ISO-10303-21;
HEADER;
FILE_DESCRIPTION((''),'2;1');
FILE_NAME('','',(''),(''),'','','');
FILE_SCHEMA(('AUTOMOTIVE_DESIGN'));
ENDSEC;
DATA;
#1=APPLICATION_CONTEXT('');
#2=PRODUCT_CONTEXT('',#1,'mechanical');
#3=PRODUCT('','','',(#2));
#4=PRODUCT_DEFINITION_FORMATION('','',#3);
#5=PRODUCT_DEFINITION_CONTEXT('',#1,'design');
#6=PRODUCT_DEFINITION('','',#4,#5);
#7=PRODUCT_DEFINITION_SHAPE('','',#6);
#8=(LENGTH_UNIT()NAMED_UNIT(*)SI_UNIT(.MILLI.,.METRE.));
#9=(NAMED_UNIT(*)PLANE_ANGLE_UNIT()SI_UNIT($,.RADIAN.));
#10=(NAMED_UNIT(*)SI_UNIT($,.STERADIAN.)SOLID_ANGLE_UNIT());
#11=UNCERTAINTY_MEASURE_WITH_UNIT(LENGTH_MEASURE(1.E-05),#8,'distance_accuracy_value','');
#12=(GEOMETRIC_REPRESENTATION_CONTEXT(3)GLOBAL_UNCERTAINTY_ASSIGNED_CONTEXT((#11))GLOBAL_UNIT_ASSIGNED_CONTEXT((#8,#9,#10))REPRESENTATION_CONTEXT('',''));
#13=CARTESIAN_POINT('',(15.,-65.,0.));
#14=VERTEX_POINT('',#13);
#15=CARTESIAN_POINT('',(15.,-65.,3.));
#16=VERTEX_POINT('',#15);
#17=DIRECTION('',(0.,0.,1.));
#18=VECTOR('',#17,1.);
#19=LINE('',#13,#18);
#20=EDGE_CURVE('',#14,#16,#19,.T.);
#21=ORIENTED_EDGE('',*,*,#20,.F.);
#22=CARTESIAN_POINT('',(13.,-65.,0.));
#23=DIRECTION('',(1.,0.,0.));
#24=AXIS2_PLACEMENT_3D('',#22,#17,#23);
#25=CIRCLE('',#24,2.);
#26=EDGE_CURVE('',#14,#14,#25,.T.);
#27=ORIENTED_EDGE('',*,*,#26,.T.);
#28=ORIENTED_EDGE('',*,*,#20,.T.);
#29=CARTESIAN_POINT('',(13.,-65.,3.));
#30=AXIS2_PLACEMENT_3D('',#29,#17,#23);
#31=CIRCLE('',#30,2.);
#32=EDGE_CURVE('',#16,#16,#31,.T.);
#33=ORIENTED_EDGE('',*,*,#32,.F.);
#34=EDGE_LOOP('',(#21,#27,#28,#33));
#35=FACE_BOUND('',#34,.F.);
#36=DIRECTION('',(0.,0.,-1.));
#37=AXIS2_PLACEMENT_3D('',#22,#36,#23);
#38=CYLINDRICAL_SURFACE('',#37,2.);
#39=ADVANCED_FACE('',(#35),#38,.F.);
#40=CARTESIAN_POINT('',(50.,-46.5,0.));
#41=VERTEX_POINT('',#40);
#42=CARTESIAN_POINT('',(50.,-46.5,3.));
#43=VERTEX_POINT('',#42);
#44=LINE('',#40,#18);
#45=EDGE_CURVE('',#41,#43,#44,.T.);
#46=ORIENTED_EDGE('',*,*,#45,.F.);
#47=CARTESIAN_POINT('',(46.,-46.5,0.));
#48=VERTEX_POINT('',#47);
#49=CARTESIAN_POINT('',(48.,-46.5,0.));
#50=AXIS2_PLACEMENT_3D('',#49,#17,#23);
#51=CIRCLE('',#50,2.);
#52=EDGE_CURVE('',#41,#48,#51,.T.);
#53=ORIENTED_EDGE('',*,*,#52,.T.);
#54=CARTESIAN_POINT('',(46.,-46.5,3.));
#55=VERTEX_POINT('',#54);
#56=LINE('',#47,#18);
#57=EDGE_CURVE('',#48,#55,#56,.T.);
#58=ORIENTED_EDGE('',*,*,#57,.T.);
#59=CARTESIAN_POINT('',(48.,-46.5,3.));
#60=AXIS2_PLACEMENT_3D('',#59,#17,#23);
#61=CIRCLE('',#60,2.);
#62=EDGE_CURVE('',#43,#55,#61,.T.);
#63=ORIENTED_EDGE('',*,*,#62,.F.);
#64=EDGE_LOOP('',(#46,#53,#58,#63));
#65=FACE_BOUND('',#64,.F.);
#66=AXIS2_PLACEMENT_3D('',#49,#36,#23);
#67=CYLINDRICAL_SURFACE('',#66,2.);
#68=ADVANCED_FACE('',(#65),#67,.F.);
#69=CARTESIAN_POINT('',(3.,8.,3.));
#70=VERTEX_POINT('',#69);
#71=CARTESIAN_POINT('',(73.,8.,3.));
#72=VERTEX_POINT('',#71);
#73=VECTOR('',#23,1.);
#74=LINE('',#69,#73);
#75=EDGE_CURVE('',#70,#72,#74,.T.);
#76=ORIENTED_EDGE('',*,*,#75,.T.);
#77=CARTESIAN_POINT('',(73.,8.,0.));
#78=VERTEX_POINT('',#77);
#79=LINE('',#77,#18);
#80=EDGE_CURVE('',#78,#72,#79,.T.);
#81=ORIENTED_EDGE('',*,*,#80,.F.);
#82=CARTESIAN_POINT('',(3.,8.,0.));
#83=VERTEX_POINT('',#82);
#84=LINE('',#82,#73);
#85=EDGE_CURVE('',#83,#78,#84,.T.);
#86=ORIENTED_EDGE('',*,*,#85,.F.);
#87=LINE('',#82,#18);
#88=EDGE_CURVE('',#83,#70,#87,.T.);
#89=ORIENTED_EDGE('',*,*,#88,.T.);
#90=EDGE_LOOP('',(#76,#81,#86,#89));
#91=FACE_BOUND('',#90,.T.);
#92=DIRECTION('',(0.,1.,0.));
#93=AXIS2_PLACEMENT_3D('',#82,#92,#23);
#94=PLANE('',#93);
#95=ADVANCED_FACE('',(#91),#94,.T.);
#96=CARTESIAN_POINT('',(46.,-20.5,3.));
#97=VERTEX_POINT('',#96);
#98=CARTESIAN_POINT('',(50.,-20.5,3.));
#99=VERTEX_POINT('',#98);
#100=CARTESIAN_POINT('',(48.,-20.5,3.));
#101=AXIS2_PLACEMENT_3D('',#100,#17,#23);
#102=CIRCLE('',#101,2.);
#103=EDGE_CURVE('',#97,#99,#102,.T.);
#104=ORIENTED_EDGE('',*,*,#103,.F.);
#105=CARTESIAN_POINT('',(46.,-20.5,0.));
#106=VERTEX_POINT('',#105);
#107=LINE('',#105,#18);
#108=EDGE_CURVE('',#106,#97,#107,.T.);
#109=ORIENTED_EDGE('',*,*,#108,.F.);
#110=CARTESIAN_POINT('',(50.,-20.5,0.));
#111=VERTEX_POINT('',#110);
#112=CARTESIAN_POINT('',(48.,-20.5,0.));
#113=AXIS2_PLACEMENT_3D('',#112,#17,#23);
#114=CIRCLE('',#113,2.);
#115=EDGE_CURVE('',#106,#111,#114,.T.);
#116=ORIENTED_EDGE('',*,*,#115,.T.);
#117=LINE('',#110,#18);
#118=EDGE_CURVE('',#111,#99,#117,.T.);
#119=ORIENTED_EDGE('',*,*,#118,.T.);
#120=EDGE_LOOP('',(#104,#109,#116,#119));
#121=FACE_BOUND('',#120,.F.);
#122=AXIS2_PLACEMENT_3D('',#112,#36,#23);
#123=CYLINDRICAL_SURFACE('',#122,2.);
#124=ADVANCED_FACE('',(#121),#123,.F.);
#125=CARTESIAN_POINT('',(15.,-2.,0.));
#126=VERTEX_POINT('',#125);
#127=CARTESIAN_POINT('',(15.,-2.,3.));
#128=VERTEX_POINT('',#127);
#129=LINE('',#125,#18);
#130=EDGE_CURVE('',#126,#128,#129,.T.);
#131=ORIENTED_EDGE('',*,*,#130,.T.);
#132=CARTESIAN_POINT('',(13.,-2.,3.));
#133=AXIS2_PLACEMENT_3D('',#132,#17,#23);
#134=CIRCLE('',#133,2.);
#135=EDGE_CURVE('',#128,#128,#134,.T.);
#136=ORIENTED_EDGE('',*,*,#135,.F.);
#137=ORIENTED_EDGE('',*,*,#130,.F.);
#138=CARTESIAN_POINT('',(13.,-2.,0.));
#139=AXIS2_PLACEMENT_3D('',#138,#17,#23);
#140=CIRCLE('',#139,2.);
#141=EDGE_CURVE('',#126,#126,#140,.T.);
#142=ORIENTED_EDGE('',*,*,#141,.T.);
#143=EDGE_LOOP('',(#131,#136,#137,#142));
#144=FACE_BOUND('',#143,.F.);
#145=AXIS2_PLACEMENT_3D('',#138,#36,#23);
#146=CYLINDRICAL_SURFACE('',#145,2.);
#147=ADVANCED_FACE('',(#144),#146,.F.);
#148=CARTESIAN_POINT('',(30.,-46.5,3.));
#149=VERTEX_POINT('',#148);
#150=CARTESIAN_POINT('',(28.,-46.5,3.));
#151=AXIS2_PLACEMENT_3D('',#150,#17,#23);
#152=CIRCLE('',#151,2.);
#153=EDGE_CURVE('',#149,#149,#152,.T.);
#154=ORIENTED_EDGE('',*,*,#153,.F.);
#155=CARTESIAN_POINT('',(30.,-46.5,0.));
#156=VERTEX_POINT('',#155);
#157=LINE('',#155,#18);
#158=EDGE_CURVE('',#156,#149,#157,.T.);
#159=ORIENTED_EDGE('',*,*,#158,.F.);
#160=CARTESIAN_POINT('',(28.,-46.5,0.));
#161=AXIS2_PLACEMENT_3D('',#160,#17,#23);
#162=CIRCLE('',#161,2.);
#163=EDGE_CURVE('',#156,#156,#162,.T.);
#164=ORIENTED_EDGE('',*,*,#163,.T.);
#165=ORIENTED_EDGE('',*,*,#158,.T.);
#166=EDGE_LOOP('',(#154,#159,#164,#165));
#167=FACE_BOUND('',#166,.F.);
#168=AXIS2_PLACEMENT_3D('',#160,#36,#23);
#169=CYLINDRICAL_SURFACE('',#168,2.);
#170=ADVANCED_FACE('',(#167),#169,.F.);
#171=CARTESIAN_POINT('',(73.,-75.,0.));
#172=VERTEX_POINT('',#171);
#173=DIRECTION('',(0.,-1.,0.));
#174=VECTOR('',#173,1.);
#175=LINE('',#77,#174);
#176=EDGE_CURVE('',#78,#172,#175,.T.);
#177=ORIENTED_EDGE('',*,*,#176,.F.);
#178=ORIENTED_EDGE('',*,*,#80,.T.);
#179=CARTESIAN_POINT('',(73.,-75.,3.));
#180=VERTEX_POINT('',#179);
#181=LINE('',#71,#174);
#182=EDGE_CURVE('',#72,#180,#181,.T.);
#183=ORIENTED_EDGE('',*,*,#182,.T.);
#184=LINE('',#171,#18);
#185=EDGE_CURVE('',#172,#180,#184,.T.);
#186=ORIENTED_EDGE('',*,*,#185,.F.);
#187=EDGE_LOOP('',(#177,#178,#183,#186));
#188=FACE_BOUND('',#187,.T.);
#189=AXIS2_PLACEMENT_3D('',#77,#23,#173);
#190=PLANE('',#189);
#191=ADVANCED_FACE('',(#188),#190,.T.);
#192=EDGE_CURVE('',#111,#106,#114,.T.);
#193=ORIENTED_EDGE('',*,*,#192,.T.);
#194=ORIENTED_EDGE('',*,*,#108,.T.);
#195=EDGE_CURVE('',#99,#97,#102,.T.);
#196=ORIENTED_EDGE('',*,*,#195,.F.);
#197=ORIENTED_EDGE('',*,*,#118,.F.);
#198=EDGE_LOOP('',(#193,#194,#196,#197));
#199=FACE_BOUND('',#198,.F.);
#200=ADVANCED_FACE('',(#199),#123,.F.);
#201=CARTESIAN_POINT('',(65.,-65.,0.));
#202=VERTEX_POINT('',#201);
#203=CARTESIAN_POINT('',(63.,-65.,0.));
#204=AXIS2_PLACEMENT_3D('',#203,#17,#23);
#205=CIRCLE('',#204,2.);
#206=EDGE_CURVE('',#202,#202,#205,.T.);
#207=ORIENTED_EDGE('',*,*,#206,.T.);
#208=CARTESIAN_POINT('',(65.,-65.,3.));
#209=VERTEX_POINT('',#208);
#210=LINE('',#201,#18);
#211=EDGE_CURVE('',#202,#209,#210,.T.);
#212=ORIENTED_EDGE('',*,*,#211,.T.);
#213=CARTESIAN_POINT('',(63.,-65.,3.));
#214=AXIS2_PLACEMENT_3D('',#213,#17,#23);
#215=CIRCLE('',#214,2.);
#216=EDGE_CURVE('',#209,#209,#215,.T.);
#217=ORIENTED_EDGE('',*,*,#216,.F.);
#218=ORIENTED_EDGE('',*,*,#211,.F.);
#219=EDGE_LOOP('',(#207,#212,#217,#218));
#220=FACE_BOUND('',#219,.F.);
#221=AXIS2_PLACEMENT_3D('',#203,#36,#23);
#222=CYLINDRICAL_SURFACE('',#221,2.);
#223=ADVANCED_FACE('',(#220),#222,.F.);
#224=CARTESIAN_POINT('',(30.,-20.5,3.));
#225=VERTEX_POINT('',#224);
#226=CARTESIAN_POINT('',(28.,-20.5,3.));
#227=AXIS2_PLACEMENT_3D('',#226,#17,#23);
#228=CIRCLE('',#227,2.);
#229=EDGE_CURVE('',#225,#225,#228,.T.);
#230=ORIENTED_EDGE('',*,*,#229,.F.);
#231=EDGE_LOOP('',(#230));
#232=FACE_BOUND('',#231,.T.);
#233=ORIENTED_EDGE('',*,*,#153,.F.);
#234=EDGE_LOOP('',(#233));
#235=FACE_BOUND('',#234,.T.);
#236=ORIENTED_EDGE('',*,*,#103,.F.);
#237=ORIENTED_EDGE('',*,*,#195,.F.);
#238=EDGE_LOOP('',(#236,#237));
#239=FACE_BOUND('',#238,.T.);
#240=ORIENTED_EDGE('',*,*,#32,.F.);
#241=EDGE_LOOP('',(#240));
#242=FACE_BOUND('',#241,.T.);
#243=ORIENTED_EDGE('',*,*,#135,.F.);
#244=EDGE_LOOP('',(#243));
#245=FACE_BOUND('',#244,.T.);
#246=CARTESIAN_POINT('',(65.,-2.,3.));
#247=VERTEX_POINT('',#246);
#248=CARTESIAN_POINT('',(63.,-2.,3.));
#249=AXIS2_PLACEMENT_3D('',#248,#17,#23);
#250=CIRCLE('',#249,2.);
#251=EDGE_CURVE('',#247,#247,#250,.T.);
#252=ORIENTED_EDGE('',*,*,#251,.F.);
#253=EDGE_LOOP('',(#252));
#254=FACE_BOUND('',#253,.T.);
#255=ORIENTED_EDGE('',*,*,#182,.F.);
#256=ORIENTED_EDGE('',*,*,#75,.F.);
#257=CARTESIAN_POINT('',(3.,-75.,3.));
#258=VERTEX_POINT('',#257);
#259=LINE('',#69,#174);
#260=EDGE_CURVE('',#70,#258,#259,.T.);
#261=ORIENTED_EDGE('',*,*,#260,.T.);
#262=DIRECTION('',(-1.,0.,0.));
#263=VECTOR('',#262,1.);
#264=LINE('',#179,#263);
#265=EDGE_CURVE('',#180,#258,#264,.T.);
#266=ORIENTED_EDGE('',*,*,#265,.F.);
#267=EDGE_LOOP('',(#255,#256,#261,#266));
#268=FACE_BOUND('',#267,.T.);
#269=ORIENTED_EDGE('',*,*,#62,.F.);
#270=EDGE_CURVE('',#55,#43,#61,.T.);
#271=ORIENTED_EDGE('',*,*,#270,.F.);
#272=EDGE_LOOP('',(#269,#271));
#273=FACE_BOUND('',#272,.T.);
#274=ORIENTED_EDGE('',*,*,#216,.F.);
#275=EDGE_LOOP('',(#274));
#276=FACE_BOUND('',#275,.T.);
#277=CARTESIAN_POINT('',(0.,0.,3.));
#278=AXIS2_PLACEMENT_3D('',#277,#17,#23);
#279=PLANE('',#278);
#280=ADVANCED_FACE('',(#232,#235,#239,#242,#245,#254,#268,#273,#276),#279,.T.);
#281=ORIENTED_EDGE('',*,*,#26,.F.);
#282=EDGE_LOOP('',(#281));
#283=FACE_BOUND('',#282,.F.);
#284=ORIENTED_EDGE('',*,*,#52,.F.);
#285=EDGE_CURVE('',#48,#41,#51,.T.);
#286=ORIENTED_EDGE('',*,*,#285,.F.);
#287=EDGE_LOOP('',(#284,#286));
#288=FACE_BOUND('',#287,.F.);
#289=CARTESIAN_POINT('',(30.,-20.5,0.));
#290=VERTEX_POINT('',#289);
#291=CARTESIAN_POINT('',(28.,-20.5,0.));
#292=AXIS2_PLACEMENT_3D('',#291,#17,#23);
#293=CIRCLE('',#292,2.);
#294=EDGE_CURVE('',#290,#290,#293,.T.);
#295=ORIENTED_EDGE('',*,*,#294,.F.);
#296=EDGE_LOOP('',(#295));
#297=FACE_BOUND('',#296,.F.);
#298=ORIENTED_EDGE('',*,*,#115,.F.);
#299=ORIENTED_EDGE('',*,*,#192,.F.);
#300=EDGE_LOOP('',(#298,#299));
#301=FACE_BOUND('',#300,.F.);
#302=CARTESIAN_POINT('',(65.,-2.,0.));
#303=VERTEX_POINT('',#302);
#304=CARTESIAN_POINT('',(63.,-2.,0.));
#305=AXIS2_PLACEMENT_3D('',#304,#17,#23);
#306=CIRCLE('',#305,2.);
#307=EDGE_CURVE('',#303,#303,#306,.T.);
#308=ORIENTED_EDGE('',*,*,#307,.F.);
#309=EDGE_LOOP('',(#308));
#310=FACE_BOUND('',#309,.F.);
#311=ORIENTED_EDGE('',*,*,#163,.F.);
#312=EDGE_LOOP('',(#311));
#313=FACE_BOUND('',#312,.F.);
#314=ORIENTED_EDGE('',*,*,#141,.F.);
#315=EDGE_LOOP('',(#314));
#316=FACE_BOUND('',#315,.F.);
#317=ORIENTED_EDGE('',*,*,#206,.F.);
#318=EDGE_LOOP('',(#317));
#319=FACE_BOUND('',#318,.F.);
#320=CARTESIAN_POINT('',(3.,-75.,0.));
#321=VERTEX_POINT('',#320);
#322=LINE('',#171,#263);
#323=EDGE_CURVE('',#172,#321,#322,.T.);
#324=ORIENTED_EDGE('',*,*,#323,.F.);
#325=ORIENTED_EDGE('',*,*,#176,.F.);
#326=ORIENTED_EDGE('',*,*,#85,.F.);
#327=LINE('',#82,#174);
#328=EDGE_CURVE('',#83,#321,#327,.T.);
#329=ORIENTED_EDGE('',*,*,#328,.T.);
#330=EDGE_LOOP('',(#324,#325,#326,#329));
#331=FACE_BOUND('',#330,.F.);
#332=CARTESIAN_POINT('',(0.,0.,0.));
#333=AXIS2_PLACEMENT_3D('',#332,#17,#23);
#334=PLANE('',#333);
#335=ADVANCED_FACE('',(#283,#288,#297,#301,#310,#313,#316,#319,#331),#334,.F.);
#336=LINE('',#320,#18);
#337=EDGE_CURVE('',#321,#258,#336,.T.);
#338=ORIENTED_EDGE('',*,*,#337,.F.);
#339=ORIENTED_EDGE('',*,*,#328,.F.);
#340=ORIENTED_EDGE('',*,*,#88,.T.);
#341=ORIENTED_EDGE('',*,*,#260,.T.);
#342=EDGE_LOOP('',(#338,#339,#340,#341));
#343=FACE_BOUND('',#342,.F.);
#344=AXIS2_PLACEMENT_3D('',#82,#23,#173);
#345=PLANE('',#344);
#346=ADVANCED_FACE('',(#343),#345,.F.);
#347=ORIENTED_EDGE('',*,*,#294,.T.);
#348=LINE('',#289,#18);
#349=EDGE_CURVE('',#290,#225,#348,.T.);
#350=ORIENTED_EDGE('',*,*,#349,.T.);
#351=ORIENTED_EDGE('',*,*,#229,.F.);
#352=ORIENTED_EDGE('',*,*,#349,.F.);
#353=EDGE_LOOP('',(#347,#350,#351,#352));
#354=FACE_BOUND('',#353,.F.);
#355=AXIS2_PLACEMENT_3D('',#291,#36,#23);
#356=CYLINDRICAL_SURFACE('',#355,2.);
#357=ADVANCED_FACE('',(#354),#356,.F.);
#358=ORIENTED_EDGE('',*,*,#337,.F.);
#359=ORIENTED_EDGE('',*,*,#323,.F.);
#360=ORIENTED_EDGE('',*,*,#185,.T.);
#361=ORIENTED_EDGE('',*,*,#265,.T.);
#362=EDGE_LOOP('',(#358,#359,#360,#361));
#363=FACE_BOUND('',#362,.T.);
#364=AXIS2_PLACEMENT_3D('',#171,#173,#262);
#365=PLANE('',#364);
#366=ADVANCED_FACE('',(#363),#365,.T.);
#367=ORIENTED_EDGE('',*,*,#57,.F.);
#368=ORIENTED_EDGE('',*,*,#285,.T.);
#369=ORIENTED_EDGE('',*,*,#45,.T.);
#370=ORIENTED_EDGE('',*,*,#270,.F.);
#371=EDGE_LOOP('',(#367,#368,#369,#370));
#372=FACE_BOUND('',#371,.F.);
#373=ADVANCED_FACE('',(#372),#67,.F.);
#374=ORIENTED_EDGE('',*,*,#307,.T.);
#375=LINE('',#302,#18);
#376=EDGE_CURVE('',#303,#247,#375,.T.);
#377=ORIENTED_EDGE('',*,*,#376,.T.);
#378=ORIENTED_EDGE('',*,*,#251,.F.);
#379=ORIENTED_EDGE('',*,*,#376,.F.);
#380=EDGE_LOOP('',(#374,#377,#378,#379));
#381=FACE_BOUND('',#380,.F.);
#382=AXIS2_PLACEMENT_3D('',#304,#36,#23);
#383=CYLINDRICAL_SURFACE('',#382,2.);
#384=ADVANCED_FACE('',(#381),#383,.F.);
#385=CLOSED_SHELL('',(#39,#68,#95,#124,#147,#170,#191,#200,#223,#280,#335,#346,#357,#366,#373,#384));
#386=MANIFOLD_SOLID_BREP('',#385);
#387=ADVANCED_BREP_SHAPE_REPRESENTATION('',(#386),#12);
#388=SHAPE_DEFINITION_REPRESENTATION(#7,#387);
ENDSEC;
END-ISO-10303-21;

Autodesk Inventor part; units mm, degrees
ref_plane "YZ Plane" through (0, 0, 0) normal (1, 0, 0) x (0, 1, 0)
ref_plane "XZ Plane" through (0, 0, 0) normal (0, 1, 0) x (-1, 0, 0)
ref_plane "XY Plane" through (0, 0, 0) normal (0, 0, 1) x (1, 0, 0)
sketch "Sketch1" plane through (0, 0, 0) normal (0, 0, 1) x (1, 0, 0)
  line L0 (73, -75) -> (3, -75)
  line L1 (3, 8) -> (3, -75)
  line L2 (3, 8) -> (73, 8)
  line L3 (73, 8) -> (73, -75)
  circle A0 centre (13, -65) radius 2
  circle A1 centre (13, -2) radius 2
  circle A2 centre (63, -65) radius 2
  circle A3 centre (63, -2) radius 2
  circle A4 centre (28, -46.5) radius 2
  circle A5 centre (48, -46.5) radius 2
  line L4 (28, -46.5) -> (48, -46.5)
  circle A6 centre (28, -20.5) radius 2
  circle A7 centre (48, -20.5) radius 2
  line L5 (28, -20.5) -> (48, -20.5)
  point P0 (0, 0)
  dimension "d0" = 70
  dimension "d1" = 83
  dimension "d4" = 4
  dimension "d5" = 10
  dimension "d6" = 10
  dimension "d7" = 4
  dimension "d8" = 4
  dimension "d9" = 4
  dimension "d10" = 10
  dimension "d11" = 10
  dimension "d12" = 10
  dimension "d13" = 10
  dimension "d14" = 10
  dimension "d15" = 10
  dimension "d16" = 4
  dimension "d17" = 20
  dimension "d18" = 4
  dimension "d19" = 4
  dimension "d20" = 20
  dimension "d21" = 4
  dimension "d22" = 26
  dimension "d23" = 28.5
  dimension "d24" = 25
extrude "Extrusion1" add sketch "Sketch1" along normal blind 3
equation "\"d10\" = d5"
equation "\"d11\" = d6"
equation "\"d13\" = d12"
equation "\"d14\" = d13"
equation "\"d15\" = d14"
equation "\"d18\" = d16"
equation "\"d21\" = d19"
equation "\"d23\" = -0.5 * d22 + 0.5 * d1"
equation "\"d24\" = -0.5 * d17 + 0.5 * d0"
properties part number "BaseC_8" material "PMMA Plastic"
